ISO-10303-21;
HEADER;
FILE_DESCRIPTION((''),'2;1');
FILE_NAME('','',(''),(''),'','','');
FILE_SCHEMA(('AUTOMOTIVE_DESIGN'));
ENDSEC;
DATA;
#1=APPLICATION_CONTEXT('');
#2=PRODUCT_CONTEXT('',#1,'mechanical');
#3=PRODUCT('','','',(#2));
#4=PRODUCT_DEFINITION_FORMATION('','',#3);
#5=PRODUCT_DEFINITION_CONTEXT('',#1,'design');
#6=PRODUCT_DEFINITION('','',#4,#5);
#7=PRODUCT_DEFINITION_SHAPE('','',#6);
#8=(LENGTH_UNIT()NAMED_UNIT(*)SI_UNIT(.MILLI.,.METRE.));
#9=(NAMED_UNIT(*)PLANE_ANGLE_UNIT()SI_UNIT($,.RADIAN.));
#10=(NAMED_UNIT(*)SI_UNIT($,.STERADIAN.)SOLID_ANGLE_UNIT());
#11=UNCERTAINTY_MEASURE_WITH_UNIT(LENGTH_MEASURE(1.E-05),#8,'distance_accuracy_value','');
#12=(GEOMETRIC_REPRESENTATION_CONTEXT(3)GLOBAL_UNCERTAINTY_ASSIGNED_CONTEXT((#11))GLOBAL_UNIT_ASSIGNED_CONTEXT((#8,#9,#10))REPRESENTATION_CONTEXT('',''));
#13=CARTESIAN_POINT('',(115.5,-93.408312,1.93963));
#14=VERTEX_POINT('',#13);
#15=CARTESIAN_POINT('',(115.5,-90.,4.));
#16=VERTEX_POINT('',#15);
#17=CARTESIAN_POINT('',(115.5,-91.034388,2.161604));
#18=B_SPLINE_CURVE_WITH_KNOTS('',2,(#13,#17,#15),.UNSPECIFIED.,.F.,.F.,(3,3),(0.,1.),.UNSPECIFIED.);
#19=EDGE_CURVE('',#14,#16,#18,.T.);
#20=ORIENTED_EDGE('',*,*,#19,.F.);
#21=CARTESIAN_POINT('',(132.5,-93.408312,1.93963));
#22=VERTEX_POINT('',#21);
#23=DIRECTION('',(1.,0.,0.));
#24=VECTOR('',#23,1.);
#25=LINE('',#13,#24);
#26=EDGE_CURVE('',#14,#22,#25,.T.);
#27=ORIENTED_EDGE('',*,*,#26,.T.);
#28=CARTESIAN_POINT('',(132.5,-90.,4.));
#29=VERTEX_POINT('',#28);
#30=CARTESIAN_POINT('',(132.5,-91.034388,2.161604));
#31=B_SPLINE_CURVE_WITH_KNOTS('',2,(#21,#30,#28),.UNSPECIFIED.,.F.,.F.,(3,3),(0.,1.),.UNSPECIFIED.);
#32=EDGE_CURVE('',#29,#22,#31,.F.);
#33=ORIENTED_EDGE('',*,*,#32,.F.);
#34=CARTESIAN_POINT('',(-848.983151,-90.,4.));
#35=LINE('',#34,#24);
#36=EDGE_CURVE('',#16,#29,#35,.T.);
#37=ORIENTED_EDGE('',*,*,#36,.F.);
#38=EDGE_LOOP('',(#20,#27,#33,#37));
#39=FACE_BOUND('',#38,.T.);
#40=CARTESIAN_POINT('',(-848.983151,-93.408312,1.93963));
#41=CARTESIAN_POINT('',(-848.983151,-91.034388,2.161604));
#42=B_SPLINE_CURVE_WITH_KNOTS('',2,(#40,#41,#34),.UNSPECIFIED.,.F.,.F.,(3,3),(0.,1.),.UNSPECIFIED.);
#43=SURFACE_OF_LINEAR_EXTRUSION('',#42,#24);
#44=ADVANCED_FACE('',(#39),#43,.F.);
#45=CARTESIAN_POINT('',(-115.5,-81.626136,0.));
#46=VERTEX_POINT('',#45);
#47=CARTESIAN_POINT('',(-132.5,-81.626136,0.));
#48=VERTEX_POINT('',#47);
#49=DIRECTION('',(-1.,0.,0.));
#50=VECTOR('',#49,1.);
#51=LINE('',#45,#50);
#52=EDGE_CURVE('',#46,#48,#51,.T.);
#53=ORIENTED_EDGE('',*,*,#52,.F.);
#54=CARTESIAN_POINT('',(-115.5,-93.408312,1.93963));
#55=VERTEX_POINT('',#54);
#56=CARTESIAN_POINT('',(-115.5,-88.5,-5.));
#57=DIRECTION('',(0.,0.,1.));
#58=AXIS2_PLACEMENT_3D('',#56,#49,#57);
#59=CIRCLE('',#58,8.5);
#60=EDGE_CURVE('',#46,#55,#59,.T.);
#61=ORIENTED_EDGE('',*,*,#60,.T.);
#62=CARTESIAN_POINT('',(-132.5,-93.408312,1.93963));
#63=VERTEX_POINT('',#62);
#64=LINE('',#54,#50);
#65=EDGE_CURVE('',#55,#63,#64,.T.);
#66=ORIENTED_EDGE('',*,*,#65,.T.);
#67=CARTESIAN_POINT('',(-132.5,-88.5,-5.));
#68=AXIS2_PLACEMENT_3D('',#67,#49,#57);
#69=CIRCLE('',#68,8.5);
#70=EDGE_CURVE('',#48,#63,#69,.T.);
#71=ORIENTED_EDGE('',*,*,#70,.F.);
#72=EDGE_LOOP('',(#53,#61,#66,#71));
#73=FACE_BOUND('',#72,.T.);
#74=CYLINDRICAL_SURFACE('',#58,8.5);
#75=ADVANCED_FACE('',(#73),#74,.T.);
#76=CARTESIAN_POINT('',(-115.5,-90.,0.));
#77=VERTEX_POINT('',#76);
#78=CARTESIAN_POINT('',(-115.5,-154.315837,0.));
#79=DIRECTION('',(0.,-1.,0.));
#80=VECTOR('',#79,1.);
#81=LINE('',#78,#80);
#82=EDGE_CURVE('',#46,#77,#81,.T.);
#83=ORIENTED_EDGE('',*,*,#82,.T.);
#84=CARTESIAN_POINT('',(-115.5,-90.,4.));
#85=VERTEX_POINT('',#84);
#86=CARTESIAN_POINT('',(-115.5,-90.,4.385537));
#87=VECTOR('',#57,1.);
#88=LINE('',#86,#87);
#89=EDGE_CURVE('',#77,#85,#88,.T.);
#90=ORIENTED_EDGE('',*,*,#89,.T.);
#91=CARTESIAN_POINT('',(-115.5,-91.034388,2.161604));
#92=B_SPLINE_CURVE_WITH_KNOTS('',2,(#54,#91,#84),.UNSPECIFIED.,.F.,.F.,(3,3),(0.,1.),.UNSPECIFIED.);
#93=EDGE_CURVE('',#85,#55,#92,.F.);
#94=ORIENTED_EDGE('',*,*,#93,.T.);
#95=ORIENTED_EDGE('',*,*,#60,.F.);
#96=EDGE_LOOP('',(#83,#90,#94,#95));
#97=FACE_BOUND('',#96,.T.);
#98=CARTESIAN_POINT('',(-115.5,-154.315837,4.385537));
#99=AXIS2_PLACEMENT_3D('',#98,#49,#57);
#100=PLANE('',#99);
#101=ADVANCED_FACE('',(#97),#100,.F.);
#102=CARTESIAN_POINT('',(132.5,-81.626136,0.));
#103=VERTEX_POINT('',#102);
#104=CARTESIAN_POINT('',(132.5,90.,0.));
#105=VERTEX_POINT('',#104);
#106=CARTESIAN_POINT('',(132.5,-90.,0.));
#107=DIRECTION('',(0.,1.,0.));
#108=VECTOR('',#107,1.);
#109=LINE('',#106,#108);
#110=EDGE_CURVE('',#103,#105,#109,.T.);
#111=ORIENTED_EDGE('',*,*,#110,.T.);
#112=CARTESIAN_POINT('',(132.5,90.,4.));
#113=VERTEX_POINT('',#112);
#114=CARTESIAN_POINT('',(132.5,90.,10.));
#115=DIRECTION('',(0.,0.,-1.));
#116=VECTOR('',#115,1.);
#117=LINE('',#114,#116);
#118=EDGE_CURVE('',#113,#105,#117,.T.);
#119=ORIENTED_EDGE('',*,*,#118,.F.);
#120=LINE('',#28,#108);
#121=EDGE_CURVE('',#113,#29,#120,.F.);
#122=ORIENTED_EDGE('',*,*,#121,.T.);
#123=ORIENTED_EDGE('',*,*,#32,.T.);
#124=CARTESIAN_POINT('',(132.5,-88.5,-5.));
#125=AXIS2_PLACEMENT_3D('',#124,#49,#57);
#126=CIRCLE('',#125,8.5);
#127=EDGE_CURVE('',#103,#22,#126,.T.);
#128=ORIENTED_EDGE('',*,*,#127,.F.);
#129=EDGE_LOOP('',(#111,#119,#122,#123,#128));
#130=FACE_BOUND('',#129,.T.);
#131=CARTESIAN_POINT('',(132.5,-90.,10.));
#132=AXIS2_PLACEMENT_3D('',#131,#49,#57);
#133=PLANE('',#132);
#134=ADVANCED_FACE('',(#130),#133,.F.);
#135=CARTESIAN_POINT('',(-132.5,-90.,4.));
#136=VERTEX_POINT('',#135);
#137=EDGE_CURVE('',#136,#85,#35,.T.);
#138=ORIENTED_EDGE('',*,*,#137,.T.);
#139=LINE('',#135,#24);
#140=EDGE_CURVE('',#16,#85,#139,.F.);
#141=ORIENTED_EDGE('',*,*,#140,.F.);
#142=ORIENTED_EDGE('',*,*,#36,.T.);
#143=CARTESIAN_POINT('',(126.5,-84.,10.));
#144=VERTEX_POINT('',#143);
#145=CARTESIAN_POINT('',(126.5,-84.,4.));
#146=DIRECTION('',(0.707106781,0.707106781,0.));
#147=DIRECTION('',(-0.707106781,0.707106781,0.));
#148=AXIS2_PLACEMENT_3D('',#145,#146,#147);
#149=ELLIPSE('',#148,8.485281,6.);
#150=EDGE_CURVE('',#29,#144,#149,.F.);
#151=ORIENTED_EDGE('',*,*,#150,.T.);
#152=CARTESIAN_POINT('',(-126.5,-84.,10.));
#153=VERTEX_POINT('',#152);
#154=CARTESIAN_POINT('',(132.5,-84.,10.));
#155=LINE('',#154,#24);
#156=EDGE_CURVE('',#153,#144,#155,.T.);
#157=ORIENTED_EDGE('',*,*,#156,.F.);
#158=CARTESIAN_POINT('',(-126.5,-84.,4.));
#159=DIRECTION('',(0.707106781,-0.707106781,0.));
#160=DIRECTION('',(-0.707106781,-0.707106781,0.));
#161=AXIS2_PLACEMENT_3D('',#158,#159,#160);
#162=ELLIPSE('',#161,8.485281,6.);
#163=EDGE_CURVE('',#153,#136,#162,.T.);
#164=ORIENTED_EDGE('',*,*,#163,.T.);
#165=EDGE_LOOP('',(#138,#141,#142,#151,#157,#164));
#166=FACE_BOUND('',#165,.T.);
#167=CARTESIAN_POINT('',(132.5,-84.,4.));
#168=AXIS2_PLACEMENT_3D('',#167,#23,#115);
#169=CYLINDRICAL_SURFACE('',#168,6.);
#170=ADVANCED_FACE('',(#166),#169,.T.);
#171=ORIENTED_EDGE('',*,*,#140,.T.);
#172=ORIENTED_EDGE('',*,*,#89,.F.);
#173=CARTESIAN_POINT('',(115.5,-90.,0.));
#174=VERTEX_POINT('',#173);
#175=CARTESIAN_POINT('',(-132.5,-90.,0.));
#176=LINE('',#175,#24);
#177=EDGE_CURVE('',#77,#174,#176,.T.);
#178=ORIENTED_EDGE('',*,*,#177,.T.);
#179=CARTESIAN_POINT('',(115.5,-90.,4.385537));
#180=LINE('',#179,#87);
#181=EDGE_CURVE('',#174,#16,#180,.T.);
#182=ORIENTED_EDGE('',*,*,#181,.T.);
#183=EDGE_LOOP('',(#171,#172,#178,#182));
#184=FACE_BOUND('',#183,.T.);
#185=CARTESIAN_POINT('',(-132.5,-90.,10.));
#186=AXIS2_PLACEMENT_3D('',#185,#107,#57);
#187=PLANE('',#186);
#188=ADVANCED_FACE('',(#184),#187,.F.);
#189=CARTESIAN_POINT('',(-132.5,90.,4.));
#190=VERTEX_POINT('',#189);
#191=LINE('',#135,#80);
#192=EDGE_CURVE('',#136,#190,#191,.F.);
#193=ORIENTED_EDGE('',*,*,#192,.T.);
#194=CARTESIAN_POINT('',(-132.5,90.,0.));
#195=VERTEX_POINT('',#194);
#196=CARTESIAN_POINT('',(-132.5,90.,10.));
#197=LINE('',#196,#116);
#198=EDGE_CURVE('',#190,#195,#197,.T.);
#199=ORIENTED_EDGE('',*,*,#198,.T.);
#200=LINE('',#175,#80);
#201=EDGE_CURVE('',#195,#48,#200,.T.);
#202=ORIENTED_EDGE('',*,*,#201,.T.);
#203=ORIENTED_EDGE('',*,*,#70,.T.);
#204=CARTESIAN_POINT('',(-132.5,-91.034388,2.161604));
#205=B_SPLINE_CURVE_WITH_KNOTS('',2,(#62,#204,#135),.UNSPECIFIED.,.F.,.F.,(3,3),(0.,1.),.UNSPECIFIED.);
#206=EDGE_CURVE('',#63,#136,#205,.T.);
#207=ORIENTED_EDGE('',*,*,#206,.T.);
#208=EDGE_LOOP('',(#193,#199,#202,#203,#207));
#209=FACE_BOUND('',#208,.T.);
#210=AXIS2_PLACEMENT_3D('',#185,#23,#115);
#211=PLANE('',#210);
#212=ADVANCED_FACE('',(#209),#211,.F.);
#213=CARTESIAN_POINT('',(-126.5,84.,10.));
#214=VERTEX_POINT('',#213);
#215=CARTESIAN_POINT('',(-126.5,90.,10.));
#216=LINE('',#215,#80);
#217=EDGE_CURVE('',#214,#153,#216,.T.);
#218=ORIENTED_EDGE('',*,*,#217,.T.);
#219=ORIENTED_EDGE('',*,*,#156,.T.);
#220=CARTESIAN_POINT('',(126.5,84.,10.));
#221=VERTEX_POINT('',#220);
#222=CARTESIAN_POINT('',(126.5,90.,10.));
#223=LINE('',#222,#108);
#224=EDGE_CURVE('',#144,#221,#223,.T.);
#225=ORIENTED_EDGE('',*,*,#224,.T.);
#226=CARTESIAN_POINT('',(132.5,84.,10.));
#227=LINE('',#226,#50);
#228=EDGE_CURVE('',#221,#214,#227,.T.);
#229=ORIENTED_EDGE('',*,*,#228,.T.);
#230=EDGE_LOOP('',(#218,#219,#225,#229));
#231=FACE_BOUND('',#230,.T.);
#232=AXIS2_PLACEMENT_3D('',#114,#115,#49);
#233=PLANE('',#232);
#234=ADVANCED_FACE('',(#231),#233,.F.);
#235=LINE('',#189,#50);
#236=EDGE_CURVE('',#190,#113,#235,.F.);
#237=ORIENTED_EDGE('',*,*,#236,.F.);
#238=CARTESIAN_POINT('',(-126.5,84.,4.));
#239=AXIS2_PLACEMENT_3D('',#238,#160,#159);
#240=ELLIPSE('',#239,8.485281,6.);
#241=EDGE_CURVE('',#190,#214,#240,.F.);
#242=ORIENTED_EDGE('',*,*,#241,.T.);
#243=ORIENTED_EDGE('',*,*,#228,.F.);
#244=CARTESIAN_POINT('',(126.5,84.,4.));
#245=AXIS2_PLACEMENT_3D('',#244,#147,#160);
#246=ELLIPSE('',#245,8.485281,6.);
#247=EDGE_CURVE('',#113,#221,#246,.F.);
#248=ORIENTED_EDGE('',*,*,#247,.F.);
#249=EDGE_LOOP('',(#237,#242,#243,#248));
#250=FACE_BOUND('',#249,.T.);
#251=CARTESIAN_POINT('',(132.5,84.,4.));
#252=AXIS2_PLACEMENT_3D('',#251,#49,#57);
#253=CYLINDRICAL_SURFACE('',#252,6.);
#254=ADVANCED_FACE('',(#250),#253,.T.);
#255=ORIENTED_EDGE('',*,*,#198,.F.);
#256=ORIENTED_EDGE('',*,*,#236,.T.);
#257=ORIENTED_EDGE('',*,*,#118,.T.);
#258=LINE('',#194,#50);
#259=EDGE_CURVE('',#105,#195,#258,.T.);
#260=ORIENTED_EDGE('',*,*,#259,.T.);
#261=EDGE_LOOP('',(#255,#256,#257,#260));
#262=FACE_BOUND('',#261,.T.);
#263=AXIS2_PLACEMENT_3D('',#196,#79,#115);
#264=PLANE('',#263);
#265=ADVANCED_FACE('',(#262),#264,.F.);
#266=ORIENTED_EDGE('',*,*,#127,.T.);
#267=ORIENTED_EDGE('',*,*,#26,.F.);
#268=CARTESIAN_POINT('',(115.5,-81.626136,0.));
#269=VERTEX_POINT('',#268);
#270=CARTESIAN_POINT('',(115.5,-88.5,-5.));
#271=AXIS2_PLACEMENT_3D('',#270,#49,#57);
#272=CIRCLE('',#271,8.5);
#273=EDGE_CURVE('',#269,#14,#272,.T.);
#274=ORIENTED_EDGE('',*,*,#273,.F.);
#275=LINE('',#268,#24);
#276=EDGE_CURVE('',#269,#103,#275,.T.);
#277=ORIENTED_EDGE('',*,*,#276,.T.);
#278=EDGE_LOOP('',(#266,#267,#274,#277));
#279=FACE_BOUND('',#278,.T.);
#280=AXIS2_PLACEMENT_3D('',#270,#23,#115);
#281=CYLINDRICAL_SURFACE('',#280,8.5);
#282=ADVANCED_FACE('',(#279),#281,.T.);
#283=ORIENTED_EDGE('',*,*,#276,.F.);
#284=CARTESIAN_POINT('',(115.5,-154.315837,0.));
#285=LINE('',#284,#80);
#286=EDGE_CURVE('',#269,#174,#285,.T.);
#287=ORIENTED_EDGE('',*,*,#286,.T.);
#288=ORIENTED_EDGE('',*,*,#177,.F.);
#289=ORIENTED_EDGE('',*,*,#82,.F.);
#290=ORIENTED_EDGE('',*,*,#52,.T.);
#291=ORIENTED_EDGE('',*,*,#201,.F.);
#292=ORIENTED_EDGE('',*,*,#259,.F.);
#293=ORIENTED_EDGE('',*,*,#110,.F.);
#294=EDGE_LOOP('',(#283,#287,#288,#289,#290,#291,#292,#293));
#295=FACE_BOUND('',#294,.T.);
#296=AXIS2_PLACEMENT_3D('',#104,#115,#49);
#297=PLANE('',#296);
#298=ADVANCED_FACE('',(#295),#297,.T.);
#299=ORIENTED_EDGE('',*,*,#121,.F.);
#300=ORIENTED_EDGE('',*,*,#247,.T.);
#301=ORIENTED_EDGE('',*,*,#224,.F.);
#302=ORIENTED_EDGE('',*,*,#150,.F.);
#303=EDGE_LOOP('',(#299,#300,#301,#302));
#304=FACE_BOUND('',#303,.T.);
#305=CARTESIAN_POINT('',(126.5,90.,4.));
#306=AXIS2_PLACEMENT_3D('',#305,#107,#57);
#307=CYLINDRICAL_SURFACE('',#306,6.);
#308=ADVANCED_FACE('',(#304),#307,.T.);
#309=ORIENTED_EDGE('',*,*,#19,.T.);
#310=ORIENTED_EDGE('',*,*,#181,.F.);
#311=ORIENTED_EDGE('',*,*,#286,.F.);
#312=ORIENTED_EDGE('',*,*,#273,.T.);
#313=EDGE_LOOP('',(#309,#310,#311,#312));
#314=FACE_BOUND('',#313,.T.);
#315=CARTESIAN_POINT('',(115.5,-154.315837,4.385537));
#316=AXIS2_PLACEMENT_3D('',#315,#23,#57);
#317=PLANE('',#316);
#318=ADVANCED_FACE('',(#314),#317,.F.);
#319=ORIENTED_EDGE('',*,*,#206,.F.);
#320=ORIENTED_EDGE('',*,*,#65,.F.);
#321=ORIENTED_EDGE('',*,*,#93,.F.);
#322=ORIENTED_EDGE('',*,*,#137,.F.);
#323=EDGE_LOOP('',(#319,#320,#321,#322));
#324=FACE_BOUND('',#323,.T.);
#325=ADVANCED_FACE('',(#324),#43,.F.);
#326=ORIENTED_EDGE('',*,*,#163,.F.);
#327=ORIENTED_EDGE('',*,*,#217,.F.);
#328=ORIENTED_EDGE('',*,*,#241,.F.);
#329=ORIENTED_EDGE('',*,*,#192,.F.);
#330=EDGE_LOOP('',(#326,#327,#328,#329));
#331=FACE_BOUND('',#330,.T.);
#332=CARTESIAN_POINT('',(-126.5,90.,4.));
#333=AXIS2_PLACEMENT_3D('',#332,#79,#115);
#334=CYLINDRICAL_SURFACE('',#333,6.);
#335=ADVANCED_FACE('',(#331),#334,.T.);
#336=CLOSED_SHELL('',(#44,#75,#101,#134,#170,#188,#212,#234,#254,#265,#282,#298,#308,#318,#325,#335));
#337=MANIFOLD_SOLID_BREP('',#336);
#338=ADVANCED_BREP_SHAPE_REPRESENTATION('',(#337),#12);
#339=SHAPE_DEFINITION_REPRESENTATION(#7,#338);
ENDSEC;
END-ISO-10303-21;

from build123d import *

# Parameters (mm, degrees)
SKETCH1_W           = 265
SKETCH1_H           = 180
BOSS_EXTRUDE1_DEPTH = 10
BOSS_EXTRUDE2_START = -17
BOSS_EXTRUDE2_DEPTH = 17
FILLET1_R           = 6
FILLET2_R           = 6
CUT_EXTRUDE2_START  = -265
CUT_EXTRUDE2_DEPTH  = 265


# Read off the part's stored shape, not the designer's step: Boss-Extrude2, Cut-Extrude2
with BuildPart() as part:
    # Sketch1 → Boss-Extrude1 (new body)
    with BuildSketch(Plane.XY):
        Rectangle(SKETCH1_W, SKETCH1_H)
    extrude(amount=BOSS_EXTRUDE1_DEPTH)

    # Boss-Extrude2 outline → Boss-Extrude2 (add)
    with BuildSketch(Plane.ZY.offset(132.5).offset(BOSS_EXTRUDE2_START)):
        with BuildLine():
            ThreePointArc((0, -81.626136458), (-13.387109794, -89.880720577), (1.939630355, -93.408312392))
            add(Edge.make_bspline(
                [(1.939630355, -93.408312392), (5.863215247, -91.451215581), (10, -90)],
                knots=[0, 0, 0, 1, 1, 1], degree=2))
            Line((10, -90), (0, -90))
            Line((0, -90), (0, -81.626136458))
        make_face()
    boss_extrude2 = extrude(amount=BOSS_EXTRUDE2_DEPTH)

    # Mirror1: Boss-Extrude2 across plane
    add(boss_extrude2.mirror(Plane(origin=(0, 0, 0), x_dir=(0, 0, 1), z_dir=(1, 0, 0))))

    # Fillet1
    fillet1_edges = [part.edges().sort_by_distance(p)[0] for p in [
        (132.5, 0, 10),
        (0, 90, 10),
        (-132.5, 0, 10),
    ]]
    fillet(fillet1_edges, radius=FILLET1_R)

    # Fillet2
    fillet2_edges = [part.edges().sort_by_distance(p)[0] for p in [
        (0, -90, 10),
    ]]
    fillet(fillet2_edges, radius=FILLET2_R)

    # Cut-Extrude2 outline → Cut-Extrude2 (cut)
    with BuildSketch(Plane.ZY.offset(132.5).offset(CUT_EXTRUDE2_START)):
        with BuildLine():
            add(Edge.make_bspline(
                [(1.939630355, -93.408312392), (2.161603751, -91.034387849), (4, -90)],
                knots=[0, 0, 0, 1, 1, 1], degree=2))
            add(Edge.make_bspline(
                [(1.939630355, -93.408312392), (5.863215247, -91.451215581), (10, -90)],
                knots=[0, 0, 0, 1, 1, 1], degree=2))
            Line((10, -90), (10, -84))
            ThreePointArc((10, -84), (8.242640687, -88.242640687), (4, -90))
        make_face()
    extrude(amount=CUT_EXTRUDE2_DEPTH, mode=Mode.SUBTRACT)


solid = part.part
